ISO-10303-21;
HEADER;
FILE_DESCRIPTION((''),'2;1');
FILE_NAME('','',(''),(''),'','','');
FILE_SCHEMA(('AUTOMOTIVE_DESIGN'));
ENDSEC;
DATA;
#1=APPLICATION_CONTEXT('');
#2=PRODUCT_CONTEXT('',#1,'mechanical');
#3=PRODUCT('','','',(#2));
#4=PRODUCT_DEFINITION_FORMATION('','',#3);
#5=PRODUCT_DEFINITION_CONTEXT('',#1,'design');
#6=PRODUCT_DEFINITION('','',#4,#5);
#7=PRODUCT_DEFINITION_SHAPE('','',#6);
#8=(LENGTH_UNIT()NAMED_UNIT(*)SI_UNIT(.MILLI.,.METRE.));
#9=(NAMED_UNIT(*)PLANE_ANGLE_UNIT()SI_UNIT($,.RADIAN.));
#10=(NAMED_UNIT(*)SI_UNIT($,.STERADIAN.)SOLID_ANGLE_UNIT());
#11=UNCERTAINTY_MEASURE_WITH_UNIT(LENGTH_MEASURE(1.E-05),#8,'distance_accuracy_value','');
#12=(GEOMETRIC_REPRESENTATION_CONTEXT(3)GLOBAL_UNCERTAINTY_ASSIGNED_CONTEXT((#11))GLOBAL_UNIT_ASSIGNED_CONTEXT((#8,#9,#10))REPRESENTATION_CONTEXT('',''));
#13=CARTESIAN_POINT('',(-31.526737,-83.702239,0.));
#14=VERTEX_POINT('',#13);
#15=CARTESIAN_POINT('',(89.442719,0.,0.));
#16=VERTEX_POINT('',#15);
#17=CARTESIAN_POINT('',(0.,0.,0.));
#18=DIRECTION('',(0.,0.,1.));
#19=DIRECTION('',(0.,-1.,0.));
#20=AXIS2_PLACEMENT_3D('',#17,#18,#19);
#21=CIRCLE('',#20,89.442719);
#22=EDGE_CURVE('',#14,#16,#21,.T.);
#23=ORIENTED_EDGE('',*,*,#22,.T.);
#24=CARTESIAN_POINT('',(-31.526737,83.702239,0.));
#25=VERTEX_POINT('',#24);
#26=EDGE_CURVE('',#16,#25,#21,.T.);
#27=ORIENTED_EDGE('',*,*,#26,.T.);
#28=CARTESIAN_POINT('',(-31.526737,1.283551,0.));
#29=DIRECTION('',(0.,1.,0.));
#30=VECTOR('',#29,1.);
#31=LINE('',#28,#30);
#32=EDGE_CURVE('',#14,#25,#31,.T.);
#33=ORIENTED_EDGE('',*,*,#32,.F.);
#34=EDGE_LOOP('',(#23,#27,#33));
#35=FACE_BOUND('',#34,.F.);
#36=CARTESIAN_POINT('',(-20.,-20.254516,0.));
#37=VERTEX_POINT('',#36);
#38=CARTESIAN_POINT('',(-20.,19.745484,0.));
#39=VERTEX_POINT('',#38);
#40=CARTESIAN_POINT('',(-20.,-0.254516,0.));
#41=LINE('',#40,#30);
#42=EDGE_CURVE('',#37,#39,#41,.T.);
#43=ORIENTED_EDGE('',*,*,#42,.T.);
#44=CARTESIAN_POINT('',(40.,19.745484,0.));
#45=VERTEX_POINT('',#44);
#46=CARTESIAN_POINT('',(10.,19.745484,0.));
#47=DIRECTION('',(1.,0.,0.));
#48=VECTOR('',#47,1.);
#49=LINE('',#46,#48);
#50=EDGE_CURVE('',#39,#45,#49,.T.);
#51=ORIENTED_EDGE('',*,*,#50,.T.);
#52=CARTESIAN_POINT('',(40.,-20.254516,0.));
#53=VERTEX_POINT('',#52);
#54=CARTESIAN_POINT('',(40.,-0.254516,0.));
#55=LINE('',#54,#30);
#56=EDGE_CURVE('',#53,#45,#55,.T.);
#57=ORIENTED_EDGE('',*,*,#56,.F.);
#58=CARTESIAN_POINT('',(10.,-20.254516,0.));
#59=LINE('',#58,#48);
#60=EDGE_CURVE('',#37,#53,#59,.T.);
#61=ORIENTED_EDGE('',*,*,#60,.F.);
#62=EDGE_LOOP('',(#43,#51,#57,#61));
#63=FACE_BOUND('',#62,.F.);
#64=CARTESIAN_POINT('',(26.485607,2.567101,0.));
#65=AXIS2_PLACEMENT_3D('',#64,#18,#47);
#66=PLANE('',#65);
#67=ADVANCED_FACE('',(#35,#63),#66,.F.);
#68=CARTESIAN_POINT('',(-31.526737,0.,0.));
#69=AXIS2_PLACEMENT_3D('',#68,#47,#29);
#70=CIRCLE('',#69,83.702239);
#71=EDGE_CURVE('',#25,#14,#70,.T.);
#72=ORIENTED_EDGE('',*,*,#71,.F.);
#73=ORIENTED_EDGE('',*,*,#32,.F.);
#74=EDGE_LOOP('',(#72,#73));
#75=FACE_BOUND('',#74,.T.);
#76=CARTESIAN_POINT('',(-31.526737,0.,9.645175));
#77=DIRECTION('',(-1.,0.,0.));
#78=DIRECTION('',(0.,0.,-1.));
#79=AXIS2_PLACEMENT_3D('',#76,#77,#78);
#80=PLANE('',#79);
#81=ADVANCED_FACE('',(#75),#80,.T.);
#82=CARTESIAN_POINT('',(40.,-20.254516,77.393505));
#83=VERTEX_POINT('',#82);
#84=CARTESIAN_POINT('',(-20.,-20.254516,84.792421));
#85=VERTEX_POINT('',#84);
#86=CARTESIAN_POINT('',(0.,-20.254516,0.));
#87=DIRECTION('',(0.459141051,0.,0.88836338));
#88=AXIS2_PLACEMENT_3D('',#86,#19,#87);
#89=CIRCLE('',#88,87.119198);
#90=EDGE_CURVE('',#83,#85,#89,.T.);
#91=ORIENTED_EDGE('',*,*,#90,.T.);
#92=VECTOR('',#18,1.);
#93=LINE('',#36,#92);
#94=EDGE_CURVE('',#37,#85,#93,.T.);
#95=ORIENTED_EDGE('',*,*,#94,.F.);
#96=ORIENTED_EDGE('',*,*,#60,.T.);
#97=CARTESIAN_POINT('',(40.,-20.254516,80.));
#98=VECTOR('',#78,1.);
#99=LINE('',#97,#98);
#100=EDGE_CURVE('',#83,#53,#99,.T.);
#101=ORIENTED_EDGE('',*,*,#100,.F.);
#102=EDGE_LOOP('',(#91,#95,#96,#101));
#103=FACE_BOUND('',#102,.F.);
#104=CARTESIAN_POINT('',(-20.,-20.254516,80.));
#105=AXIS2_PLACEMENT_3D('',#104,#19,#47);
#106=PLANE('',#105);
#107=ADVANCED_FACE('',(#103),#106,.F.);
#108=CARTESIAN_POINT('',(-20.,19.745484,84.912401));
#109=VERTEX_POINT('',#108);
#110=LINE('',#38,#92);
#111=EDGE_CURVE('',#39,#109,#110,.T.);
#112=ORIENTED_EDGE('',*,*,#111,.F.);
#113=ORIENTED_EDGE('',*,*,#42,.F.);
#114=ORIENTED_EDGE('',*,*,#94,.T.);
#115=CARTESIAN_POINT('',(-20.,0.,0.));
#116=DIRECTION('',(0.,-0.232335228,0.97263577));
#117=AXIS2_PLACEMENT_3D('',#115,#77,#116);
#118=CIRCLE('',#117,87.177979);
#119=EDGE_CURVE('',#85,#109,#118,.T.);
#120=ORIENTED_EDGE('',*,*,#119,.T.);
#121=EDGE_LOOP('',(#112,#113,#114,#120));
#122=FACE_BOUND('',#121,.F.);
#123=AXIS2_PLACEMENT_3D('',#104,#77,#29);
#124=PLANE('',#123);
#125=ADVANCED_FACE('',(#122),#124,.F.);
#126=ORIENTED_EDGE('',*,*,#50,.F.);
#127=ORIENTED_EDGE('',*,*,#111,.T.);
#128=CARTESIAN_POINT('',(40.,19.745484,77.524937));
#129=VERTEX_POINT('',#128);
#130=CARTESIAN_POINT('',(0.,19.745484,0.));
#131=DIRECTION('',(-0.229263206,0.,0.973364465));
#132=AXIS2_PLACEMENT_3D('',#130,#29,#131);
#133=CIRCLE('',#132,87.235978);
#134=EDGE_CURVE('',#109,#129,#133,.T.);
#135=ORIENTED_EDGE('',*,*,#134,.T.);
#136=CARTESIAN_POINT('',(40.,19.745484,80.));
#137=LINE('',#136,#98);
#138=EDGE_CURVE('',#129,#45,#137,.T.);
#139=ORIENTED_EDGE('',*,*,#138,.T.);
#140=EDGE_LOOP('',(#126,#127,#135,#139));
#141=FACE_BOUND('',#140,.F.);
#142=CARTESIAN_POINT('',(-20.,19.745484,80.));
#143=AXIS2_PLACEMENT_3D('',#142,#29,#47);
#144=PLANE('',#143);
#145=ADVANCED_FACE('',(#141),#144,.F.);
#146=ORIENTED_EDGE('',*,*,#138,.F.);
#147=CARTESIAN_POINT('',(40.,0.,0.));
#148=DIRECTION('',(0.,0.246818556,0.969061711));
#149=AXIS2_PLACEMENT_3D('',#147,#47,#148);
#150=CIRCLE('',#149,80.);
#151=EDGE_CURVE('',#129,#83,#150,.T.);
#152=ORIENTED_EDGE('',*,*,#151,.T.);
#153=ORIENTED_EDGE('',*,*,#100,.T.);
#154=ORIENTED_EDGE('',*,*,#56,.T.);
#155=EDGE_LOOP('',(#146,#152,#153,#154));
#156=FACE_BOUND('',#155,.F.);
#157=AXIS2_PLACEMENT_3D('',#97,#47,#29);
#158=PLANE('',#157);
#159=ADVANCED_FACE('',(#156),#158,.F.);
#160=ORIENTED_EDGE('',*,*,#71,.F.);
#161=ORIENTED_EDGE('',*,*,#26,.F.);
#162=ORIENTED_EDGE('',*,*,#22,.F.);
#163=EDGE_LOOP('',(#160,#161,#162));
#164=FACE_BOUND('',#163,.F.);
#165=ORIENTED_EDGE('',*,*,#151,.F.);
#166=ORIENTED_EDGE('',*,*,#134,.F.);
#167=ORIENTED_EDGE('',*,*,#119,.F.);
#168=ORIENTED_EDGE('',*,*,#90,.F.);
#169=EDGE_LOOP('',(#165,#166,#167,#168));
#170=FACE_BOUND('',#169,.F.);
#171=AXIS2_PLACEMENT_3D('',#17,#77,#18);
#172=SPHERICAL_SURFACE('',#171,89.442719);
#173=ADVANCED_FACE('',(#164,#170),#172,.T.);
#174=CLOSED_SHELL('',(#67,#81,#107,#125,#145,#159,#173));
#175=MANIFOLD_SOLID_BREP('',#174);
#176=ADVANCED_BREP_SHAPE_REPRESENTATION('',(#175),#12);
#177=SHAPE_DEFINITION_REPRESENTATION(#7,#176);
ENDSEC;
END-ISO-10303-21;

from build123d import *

# Parameters (mm, degrees)
F0_W          = 60
F0_H          = 40
F1_DEPTH      = 80
F4_W          = 60
F4_H          = 40
F5_DEPTH      = 25
F5_DEPTH_BACK = 80
F7_E7_W       = 192.0395717025
F7_E7_H       = 176.2685924768
F8_DEPTH      = 68.6223879457
F9_W          = 146.8224227428
F9_H          = 227.745719254
F10_DEPTH     = 104.3368522078


with BuildPart() as f1:
    # F0 (on Top) → F1 (new body)
    with BuildSketch(Plane.XY):
        with Locations((10, -0.2545155585)):
            Rectangle(F0_W, F0_H)
    extrude(amount=F1_DEPTH)

    # F2 (on Front) → F3 (revolve)
    with BuildSketch(Plane.XZ):
        with BuildLine():
            ThreePointArc((89.4427191, 0), (76.0845213036, 47.0228201834), (40, 80))
            Line((40, 80), (40, 0))
            Line((40, 0), (89.4427191, 0))
        make_face()
        with BuildLine():
            Line((40, 0), (40, 80))
            ThreePointArc((40, 80), (-47.0228201834, 76.0845213036), (-89.4427191, 0))
            Line((-89.4427191, 0), (40, 0))
        make_face()
    revolve(axis=Axis((0, 0, 0), (1, 0, 0)))

    # F4 (on face) → F5 (cut, two sides)
    with BuildSketch(Plane.XY.offset(80)) as f5_sk:
        with Locations((10, -0.2545155585)):
            Rectangle(F4_W, F4_H)
    extrude(amount=F5_DEPTH, mode=Mode.SUBTRACT)
    extrude(f5_sk.sketch, amount=-F5_DEPTH_BACK, mode=Mode.SUBTRACT)

    # F7_E7 (on explicit) → F8 (cut)
    with BuildSketch(Plane(origin=(-31.5267369151, 88.1342962384, 105.66496104), x_dir=(0, 0, -1), z_dir=(-1, 0, 0))):
        with Locations((96.0197858512, 88.1342962384)):
            Rectangle(F7_E7_W, F7_E7_H)
    extrude(amount=F8_DEPTH, mode=Mode.SUBTRACT)

    # F9 (on Top) → F10 (cut)
    with BuildSketch(Plane.XY):
        with Locations((26.485607028, 2.56710127)):
            Rectangle(F9_W, F9_H)
    extrude(amount=-F10_DEPTH, mode=Mode.SUBTRACT)


solid = f1.part
